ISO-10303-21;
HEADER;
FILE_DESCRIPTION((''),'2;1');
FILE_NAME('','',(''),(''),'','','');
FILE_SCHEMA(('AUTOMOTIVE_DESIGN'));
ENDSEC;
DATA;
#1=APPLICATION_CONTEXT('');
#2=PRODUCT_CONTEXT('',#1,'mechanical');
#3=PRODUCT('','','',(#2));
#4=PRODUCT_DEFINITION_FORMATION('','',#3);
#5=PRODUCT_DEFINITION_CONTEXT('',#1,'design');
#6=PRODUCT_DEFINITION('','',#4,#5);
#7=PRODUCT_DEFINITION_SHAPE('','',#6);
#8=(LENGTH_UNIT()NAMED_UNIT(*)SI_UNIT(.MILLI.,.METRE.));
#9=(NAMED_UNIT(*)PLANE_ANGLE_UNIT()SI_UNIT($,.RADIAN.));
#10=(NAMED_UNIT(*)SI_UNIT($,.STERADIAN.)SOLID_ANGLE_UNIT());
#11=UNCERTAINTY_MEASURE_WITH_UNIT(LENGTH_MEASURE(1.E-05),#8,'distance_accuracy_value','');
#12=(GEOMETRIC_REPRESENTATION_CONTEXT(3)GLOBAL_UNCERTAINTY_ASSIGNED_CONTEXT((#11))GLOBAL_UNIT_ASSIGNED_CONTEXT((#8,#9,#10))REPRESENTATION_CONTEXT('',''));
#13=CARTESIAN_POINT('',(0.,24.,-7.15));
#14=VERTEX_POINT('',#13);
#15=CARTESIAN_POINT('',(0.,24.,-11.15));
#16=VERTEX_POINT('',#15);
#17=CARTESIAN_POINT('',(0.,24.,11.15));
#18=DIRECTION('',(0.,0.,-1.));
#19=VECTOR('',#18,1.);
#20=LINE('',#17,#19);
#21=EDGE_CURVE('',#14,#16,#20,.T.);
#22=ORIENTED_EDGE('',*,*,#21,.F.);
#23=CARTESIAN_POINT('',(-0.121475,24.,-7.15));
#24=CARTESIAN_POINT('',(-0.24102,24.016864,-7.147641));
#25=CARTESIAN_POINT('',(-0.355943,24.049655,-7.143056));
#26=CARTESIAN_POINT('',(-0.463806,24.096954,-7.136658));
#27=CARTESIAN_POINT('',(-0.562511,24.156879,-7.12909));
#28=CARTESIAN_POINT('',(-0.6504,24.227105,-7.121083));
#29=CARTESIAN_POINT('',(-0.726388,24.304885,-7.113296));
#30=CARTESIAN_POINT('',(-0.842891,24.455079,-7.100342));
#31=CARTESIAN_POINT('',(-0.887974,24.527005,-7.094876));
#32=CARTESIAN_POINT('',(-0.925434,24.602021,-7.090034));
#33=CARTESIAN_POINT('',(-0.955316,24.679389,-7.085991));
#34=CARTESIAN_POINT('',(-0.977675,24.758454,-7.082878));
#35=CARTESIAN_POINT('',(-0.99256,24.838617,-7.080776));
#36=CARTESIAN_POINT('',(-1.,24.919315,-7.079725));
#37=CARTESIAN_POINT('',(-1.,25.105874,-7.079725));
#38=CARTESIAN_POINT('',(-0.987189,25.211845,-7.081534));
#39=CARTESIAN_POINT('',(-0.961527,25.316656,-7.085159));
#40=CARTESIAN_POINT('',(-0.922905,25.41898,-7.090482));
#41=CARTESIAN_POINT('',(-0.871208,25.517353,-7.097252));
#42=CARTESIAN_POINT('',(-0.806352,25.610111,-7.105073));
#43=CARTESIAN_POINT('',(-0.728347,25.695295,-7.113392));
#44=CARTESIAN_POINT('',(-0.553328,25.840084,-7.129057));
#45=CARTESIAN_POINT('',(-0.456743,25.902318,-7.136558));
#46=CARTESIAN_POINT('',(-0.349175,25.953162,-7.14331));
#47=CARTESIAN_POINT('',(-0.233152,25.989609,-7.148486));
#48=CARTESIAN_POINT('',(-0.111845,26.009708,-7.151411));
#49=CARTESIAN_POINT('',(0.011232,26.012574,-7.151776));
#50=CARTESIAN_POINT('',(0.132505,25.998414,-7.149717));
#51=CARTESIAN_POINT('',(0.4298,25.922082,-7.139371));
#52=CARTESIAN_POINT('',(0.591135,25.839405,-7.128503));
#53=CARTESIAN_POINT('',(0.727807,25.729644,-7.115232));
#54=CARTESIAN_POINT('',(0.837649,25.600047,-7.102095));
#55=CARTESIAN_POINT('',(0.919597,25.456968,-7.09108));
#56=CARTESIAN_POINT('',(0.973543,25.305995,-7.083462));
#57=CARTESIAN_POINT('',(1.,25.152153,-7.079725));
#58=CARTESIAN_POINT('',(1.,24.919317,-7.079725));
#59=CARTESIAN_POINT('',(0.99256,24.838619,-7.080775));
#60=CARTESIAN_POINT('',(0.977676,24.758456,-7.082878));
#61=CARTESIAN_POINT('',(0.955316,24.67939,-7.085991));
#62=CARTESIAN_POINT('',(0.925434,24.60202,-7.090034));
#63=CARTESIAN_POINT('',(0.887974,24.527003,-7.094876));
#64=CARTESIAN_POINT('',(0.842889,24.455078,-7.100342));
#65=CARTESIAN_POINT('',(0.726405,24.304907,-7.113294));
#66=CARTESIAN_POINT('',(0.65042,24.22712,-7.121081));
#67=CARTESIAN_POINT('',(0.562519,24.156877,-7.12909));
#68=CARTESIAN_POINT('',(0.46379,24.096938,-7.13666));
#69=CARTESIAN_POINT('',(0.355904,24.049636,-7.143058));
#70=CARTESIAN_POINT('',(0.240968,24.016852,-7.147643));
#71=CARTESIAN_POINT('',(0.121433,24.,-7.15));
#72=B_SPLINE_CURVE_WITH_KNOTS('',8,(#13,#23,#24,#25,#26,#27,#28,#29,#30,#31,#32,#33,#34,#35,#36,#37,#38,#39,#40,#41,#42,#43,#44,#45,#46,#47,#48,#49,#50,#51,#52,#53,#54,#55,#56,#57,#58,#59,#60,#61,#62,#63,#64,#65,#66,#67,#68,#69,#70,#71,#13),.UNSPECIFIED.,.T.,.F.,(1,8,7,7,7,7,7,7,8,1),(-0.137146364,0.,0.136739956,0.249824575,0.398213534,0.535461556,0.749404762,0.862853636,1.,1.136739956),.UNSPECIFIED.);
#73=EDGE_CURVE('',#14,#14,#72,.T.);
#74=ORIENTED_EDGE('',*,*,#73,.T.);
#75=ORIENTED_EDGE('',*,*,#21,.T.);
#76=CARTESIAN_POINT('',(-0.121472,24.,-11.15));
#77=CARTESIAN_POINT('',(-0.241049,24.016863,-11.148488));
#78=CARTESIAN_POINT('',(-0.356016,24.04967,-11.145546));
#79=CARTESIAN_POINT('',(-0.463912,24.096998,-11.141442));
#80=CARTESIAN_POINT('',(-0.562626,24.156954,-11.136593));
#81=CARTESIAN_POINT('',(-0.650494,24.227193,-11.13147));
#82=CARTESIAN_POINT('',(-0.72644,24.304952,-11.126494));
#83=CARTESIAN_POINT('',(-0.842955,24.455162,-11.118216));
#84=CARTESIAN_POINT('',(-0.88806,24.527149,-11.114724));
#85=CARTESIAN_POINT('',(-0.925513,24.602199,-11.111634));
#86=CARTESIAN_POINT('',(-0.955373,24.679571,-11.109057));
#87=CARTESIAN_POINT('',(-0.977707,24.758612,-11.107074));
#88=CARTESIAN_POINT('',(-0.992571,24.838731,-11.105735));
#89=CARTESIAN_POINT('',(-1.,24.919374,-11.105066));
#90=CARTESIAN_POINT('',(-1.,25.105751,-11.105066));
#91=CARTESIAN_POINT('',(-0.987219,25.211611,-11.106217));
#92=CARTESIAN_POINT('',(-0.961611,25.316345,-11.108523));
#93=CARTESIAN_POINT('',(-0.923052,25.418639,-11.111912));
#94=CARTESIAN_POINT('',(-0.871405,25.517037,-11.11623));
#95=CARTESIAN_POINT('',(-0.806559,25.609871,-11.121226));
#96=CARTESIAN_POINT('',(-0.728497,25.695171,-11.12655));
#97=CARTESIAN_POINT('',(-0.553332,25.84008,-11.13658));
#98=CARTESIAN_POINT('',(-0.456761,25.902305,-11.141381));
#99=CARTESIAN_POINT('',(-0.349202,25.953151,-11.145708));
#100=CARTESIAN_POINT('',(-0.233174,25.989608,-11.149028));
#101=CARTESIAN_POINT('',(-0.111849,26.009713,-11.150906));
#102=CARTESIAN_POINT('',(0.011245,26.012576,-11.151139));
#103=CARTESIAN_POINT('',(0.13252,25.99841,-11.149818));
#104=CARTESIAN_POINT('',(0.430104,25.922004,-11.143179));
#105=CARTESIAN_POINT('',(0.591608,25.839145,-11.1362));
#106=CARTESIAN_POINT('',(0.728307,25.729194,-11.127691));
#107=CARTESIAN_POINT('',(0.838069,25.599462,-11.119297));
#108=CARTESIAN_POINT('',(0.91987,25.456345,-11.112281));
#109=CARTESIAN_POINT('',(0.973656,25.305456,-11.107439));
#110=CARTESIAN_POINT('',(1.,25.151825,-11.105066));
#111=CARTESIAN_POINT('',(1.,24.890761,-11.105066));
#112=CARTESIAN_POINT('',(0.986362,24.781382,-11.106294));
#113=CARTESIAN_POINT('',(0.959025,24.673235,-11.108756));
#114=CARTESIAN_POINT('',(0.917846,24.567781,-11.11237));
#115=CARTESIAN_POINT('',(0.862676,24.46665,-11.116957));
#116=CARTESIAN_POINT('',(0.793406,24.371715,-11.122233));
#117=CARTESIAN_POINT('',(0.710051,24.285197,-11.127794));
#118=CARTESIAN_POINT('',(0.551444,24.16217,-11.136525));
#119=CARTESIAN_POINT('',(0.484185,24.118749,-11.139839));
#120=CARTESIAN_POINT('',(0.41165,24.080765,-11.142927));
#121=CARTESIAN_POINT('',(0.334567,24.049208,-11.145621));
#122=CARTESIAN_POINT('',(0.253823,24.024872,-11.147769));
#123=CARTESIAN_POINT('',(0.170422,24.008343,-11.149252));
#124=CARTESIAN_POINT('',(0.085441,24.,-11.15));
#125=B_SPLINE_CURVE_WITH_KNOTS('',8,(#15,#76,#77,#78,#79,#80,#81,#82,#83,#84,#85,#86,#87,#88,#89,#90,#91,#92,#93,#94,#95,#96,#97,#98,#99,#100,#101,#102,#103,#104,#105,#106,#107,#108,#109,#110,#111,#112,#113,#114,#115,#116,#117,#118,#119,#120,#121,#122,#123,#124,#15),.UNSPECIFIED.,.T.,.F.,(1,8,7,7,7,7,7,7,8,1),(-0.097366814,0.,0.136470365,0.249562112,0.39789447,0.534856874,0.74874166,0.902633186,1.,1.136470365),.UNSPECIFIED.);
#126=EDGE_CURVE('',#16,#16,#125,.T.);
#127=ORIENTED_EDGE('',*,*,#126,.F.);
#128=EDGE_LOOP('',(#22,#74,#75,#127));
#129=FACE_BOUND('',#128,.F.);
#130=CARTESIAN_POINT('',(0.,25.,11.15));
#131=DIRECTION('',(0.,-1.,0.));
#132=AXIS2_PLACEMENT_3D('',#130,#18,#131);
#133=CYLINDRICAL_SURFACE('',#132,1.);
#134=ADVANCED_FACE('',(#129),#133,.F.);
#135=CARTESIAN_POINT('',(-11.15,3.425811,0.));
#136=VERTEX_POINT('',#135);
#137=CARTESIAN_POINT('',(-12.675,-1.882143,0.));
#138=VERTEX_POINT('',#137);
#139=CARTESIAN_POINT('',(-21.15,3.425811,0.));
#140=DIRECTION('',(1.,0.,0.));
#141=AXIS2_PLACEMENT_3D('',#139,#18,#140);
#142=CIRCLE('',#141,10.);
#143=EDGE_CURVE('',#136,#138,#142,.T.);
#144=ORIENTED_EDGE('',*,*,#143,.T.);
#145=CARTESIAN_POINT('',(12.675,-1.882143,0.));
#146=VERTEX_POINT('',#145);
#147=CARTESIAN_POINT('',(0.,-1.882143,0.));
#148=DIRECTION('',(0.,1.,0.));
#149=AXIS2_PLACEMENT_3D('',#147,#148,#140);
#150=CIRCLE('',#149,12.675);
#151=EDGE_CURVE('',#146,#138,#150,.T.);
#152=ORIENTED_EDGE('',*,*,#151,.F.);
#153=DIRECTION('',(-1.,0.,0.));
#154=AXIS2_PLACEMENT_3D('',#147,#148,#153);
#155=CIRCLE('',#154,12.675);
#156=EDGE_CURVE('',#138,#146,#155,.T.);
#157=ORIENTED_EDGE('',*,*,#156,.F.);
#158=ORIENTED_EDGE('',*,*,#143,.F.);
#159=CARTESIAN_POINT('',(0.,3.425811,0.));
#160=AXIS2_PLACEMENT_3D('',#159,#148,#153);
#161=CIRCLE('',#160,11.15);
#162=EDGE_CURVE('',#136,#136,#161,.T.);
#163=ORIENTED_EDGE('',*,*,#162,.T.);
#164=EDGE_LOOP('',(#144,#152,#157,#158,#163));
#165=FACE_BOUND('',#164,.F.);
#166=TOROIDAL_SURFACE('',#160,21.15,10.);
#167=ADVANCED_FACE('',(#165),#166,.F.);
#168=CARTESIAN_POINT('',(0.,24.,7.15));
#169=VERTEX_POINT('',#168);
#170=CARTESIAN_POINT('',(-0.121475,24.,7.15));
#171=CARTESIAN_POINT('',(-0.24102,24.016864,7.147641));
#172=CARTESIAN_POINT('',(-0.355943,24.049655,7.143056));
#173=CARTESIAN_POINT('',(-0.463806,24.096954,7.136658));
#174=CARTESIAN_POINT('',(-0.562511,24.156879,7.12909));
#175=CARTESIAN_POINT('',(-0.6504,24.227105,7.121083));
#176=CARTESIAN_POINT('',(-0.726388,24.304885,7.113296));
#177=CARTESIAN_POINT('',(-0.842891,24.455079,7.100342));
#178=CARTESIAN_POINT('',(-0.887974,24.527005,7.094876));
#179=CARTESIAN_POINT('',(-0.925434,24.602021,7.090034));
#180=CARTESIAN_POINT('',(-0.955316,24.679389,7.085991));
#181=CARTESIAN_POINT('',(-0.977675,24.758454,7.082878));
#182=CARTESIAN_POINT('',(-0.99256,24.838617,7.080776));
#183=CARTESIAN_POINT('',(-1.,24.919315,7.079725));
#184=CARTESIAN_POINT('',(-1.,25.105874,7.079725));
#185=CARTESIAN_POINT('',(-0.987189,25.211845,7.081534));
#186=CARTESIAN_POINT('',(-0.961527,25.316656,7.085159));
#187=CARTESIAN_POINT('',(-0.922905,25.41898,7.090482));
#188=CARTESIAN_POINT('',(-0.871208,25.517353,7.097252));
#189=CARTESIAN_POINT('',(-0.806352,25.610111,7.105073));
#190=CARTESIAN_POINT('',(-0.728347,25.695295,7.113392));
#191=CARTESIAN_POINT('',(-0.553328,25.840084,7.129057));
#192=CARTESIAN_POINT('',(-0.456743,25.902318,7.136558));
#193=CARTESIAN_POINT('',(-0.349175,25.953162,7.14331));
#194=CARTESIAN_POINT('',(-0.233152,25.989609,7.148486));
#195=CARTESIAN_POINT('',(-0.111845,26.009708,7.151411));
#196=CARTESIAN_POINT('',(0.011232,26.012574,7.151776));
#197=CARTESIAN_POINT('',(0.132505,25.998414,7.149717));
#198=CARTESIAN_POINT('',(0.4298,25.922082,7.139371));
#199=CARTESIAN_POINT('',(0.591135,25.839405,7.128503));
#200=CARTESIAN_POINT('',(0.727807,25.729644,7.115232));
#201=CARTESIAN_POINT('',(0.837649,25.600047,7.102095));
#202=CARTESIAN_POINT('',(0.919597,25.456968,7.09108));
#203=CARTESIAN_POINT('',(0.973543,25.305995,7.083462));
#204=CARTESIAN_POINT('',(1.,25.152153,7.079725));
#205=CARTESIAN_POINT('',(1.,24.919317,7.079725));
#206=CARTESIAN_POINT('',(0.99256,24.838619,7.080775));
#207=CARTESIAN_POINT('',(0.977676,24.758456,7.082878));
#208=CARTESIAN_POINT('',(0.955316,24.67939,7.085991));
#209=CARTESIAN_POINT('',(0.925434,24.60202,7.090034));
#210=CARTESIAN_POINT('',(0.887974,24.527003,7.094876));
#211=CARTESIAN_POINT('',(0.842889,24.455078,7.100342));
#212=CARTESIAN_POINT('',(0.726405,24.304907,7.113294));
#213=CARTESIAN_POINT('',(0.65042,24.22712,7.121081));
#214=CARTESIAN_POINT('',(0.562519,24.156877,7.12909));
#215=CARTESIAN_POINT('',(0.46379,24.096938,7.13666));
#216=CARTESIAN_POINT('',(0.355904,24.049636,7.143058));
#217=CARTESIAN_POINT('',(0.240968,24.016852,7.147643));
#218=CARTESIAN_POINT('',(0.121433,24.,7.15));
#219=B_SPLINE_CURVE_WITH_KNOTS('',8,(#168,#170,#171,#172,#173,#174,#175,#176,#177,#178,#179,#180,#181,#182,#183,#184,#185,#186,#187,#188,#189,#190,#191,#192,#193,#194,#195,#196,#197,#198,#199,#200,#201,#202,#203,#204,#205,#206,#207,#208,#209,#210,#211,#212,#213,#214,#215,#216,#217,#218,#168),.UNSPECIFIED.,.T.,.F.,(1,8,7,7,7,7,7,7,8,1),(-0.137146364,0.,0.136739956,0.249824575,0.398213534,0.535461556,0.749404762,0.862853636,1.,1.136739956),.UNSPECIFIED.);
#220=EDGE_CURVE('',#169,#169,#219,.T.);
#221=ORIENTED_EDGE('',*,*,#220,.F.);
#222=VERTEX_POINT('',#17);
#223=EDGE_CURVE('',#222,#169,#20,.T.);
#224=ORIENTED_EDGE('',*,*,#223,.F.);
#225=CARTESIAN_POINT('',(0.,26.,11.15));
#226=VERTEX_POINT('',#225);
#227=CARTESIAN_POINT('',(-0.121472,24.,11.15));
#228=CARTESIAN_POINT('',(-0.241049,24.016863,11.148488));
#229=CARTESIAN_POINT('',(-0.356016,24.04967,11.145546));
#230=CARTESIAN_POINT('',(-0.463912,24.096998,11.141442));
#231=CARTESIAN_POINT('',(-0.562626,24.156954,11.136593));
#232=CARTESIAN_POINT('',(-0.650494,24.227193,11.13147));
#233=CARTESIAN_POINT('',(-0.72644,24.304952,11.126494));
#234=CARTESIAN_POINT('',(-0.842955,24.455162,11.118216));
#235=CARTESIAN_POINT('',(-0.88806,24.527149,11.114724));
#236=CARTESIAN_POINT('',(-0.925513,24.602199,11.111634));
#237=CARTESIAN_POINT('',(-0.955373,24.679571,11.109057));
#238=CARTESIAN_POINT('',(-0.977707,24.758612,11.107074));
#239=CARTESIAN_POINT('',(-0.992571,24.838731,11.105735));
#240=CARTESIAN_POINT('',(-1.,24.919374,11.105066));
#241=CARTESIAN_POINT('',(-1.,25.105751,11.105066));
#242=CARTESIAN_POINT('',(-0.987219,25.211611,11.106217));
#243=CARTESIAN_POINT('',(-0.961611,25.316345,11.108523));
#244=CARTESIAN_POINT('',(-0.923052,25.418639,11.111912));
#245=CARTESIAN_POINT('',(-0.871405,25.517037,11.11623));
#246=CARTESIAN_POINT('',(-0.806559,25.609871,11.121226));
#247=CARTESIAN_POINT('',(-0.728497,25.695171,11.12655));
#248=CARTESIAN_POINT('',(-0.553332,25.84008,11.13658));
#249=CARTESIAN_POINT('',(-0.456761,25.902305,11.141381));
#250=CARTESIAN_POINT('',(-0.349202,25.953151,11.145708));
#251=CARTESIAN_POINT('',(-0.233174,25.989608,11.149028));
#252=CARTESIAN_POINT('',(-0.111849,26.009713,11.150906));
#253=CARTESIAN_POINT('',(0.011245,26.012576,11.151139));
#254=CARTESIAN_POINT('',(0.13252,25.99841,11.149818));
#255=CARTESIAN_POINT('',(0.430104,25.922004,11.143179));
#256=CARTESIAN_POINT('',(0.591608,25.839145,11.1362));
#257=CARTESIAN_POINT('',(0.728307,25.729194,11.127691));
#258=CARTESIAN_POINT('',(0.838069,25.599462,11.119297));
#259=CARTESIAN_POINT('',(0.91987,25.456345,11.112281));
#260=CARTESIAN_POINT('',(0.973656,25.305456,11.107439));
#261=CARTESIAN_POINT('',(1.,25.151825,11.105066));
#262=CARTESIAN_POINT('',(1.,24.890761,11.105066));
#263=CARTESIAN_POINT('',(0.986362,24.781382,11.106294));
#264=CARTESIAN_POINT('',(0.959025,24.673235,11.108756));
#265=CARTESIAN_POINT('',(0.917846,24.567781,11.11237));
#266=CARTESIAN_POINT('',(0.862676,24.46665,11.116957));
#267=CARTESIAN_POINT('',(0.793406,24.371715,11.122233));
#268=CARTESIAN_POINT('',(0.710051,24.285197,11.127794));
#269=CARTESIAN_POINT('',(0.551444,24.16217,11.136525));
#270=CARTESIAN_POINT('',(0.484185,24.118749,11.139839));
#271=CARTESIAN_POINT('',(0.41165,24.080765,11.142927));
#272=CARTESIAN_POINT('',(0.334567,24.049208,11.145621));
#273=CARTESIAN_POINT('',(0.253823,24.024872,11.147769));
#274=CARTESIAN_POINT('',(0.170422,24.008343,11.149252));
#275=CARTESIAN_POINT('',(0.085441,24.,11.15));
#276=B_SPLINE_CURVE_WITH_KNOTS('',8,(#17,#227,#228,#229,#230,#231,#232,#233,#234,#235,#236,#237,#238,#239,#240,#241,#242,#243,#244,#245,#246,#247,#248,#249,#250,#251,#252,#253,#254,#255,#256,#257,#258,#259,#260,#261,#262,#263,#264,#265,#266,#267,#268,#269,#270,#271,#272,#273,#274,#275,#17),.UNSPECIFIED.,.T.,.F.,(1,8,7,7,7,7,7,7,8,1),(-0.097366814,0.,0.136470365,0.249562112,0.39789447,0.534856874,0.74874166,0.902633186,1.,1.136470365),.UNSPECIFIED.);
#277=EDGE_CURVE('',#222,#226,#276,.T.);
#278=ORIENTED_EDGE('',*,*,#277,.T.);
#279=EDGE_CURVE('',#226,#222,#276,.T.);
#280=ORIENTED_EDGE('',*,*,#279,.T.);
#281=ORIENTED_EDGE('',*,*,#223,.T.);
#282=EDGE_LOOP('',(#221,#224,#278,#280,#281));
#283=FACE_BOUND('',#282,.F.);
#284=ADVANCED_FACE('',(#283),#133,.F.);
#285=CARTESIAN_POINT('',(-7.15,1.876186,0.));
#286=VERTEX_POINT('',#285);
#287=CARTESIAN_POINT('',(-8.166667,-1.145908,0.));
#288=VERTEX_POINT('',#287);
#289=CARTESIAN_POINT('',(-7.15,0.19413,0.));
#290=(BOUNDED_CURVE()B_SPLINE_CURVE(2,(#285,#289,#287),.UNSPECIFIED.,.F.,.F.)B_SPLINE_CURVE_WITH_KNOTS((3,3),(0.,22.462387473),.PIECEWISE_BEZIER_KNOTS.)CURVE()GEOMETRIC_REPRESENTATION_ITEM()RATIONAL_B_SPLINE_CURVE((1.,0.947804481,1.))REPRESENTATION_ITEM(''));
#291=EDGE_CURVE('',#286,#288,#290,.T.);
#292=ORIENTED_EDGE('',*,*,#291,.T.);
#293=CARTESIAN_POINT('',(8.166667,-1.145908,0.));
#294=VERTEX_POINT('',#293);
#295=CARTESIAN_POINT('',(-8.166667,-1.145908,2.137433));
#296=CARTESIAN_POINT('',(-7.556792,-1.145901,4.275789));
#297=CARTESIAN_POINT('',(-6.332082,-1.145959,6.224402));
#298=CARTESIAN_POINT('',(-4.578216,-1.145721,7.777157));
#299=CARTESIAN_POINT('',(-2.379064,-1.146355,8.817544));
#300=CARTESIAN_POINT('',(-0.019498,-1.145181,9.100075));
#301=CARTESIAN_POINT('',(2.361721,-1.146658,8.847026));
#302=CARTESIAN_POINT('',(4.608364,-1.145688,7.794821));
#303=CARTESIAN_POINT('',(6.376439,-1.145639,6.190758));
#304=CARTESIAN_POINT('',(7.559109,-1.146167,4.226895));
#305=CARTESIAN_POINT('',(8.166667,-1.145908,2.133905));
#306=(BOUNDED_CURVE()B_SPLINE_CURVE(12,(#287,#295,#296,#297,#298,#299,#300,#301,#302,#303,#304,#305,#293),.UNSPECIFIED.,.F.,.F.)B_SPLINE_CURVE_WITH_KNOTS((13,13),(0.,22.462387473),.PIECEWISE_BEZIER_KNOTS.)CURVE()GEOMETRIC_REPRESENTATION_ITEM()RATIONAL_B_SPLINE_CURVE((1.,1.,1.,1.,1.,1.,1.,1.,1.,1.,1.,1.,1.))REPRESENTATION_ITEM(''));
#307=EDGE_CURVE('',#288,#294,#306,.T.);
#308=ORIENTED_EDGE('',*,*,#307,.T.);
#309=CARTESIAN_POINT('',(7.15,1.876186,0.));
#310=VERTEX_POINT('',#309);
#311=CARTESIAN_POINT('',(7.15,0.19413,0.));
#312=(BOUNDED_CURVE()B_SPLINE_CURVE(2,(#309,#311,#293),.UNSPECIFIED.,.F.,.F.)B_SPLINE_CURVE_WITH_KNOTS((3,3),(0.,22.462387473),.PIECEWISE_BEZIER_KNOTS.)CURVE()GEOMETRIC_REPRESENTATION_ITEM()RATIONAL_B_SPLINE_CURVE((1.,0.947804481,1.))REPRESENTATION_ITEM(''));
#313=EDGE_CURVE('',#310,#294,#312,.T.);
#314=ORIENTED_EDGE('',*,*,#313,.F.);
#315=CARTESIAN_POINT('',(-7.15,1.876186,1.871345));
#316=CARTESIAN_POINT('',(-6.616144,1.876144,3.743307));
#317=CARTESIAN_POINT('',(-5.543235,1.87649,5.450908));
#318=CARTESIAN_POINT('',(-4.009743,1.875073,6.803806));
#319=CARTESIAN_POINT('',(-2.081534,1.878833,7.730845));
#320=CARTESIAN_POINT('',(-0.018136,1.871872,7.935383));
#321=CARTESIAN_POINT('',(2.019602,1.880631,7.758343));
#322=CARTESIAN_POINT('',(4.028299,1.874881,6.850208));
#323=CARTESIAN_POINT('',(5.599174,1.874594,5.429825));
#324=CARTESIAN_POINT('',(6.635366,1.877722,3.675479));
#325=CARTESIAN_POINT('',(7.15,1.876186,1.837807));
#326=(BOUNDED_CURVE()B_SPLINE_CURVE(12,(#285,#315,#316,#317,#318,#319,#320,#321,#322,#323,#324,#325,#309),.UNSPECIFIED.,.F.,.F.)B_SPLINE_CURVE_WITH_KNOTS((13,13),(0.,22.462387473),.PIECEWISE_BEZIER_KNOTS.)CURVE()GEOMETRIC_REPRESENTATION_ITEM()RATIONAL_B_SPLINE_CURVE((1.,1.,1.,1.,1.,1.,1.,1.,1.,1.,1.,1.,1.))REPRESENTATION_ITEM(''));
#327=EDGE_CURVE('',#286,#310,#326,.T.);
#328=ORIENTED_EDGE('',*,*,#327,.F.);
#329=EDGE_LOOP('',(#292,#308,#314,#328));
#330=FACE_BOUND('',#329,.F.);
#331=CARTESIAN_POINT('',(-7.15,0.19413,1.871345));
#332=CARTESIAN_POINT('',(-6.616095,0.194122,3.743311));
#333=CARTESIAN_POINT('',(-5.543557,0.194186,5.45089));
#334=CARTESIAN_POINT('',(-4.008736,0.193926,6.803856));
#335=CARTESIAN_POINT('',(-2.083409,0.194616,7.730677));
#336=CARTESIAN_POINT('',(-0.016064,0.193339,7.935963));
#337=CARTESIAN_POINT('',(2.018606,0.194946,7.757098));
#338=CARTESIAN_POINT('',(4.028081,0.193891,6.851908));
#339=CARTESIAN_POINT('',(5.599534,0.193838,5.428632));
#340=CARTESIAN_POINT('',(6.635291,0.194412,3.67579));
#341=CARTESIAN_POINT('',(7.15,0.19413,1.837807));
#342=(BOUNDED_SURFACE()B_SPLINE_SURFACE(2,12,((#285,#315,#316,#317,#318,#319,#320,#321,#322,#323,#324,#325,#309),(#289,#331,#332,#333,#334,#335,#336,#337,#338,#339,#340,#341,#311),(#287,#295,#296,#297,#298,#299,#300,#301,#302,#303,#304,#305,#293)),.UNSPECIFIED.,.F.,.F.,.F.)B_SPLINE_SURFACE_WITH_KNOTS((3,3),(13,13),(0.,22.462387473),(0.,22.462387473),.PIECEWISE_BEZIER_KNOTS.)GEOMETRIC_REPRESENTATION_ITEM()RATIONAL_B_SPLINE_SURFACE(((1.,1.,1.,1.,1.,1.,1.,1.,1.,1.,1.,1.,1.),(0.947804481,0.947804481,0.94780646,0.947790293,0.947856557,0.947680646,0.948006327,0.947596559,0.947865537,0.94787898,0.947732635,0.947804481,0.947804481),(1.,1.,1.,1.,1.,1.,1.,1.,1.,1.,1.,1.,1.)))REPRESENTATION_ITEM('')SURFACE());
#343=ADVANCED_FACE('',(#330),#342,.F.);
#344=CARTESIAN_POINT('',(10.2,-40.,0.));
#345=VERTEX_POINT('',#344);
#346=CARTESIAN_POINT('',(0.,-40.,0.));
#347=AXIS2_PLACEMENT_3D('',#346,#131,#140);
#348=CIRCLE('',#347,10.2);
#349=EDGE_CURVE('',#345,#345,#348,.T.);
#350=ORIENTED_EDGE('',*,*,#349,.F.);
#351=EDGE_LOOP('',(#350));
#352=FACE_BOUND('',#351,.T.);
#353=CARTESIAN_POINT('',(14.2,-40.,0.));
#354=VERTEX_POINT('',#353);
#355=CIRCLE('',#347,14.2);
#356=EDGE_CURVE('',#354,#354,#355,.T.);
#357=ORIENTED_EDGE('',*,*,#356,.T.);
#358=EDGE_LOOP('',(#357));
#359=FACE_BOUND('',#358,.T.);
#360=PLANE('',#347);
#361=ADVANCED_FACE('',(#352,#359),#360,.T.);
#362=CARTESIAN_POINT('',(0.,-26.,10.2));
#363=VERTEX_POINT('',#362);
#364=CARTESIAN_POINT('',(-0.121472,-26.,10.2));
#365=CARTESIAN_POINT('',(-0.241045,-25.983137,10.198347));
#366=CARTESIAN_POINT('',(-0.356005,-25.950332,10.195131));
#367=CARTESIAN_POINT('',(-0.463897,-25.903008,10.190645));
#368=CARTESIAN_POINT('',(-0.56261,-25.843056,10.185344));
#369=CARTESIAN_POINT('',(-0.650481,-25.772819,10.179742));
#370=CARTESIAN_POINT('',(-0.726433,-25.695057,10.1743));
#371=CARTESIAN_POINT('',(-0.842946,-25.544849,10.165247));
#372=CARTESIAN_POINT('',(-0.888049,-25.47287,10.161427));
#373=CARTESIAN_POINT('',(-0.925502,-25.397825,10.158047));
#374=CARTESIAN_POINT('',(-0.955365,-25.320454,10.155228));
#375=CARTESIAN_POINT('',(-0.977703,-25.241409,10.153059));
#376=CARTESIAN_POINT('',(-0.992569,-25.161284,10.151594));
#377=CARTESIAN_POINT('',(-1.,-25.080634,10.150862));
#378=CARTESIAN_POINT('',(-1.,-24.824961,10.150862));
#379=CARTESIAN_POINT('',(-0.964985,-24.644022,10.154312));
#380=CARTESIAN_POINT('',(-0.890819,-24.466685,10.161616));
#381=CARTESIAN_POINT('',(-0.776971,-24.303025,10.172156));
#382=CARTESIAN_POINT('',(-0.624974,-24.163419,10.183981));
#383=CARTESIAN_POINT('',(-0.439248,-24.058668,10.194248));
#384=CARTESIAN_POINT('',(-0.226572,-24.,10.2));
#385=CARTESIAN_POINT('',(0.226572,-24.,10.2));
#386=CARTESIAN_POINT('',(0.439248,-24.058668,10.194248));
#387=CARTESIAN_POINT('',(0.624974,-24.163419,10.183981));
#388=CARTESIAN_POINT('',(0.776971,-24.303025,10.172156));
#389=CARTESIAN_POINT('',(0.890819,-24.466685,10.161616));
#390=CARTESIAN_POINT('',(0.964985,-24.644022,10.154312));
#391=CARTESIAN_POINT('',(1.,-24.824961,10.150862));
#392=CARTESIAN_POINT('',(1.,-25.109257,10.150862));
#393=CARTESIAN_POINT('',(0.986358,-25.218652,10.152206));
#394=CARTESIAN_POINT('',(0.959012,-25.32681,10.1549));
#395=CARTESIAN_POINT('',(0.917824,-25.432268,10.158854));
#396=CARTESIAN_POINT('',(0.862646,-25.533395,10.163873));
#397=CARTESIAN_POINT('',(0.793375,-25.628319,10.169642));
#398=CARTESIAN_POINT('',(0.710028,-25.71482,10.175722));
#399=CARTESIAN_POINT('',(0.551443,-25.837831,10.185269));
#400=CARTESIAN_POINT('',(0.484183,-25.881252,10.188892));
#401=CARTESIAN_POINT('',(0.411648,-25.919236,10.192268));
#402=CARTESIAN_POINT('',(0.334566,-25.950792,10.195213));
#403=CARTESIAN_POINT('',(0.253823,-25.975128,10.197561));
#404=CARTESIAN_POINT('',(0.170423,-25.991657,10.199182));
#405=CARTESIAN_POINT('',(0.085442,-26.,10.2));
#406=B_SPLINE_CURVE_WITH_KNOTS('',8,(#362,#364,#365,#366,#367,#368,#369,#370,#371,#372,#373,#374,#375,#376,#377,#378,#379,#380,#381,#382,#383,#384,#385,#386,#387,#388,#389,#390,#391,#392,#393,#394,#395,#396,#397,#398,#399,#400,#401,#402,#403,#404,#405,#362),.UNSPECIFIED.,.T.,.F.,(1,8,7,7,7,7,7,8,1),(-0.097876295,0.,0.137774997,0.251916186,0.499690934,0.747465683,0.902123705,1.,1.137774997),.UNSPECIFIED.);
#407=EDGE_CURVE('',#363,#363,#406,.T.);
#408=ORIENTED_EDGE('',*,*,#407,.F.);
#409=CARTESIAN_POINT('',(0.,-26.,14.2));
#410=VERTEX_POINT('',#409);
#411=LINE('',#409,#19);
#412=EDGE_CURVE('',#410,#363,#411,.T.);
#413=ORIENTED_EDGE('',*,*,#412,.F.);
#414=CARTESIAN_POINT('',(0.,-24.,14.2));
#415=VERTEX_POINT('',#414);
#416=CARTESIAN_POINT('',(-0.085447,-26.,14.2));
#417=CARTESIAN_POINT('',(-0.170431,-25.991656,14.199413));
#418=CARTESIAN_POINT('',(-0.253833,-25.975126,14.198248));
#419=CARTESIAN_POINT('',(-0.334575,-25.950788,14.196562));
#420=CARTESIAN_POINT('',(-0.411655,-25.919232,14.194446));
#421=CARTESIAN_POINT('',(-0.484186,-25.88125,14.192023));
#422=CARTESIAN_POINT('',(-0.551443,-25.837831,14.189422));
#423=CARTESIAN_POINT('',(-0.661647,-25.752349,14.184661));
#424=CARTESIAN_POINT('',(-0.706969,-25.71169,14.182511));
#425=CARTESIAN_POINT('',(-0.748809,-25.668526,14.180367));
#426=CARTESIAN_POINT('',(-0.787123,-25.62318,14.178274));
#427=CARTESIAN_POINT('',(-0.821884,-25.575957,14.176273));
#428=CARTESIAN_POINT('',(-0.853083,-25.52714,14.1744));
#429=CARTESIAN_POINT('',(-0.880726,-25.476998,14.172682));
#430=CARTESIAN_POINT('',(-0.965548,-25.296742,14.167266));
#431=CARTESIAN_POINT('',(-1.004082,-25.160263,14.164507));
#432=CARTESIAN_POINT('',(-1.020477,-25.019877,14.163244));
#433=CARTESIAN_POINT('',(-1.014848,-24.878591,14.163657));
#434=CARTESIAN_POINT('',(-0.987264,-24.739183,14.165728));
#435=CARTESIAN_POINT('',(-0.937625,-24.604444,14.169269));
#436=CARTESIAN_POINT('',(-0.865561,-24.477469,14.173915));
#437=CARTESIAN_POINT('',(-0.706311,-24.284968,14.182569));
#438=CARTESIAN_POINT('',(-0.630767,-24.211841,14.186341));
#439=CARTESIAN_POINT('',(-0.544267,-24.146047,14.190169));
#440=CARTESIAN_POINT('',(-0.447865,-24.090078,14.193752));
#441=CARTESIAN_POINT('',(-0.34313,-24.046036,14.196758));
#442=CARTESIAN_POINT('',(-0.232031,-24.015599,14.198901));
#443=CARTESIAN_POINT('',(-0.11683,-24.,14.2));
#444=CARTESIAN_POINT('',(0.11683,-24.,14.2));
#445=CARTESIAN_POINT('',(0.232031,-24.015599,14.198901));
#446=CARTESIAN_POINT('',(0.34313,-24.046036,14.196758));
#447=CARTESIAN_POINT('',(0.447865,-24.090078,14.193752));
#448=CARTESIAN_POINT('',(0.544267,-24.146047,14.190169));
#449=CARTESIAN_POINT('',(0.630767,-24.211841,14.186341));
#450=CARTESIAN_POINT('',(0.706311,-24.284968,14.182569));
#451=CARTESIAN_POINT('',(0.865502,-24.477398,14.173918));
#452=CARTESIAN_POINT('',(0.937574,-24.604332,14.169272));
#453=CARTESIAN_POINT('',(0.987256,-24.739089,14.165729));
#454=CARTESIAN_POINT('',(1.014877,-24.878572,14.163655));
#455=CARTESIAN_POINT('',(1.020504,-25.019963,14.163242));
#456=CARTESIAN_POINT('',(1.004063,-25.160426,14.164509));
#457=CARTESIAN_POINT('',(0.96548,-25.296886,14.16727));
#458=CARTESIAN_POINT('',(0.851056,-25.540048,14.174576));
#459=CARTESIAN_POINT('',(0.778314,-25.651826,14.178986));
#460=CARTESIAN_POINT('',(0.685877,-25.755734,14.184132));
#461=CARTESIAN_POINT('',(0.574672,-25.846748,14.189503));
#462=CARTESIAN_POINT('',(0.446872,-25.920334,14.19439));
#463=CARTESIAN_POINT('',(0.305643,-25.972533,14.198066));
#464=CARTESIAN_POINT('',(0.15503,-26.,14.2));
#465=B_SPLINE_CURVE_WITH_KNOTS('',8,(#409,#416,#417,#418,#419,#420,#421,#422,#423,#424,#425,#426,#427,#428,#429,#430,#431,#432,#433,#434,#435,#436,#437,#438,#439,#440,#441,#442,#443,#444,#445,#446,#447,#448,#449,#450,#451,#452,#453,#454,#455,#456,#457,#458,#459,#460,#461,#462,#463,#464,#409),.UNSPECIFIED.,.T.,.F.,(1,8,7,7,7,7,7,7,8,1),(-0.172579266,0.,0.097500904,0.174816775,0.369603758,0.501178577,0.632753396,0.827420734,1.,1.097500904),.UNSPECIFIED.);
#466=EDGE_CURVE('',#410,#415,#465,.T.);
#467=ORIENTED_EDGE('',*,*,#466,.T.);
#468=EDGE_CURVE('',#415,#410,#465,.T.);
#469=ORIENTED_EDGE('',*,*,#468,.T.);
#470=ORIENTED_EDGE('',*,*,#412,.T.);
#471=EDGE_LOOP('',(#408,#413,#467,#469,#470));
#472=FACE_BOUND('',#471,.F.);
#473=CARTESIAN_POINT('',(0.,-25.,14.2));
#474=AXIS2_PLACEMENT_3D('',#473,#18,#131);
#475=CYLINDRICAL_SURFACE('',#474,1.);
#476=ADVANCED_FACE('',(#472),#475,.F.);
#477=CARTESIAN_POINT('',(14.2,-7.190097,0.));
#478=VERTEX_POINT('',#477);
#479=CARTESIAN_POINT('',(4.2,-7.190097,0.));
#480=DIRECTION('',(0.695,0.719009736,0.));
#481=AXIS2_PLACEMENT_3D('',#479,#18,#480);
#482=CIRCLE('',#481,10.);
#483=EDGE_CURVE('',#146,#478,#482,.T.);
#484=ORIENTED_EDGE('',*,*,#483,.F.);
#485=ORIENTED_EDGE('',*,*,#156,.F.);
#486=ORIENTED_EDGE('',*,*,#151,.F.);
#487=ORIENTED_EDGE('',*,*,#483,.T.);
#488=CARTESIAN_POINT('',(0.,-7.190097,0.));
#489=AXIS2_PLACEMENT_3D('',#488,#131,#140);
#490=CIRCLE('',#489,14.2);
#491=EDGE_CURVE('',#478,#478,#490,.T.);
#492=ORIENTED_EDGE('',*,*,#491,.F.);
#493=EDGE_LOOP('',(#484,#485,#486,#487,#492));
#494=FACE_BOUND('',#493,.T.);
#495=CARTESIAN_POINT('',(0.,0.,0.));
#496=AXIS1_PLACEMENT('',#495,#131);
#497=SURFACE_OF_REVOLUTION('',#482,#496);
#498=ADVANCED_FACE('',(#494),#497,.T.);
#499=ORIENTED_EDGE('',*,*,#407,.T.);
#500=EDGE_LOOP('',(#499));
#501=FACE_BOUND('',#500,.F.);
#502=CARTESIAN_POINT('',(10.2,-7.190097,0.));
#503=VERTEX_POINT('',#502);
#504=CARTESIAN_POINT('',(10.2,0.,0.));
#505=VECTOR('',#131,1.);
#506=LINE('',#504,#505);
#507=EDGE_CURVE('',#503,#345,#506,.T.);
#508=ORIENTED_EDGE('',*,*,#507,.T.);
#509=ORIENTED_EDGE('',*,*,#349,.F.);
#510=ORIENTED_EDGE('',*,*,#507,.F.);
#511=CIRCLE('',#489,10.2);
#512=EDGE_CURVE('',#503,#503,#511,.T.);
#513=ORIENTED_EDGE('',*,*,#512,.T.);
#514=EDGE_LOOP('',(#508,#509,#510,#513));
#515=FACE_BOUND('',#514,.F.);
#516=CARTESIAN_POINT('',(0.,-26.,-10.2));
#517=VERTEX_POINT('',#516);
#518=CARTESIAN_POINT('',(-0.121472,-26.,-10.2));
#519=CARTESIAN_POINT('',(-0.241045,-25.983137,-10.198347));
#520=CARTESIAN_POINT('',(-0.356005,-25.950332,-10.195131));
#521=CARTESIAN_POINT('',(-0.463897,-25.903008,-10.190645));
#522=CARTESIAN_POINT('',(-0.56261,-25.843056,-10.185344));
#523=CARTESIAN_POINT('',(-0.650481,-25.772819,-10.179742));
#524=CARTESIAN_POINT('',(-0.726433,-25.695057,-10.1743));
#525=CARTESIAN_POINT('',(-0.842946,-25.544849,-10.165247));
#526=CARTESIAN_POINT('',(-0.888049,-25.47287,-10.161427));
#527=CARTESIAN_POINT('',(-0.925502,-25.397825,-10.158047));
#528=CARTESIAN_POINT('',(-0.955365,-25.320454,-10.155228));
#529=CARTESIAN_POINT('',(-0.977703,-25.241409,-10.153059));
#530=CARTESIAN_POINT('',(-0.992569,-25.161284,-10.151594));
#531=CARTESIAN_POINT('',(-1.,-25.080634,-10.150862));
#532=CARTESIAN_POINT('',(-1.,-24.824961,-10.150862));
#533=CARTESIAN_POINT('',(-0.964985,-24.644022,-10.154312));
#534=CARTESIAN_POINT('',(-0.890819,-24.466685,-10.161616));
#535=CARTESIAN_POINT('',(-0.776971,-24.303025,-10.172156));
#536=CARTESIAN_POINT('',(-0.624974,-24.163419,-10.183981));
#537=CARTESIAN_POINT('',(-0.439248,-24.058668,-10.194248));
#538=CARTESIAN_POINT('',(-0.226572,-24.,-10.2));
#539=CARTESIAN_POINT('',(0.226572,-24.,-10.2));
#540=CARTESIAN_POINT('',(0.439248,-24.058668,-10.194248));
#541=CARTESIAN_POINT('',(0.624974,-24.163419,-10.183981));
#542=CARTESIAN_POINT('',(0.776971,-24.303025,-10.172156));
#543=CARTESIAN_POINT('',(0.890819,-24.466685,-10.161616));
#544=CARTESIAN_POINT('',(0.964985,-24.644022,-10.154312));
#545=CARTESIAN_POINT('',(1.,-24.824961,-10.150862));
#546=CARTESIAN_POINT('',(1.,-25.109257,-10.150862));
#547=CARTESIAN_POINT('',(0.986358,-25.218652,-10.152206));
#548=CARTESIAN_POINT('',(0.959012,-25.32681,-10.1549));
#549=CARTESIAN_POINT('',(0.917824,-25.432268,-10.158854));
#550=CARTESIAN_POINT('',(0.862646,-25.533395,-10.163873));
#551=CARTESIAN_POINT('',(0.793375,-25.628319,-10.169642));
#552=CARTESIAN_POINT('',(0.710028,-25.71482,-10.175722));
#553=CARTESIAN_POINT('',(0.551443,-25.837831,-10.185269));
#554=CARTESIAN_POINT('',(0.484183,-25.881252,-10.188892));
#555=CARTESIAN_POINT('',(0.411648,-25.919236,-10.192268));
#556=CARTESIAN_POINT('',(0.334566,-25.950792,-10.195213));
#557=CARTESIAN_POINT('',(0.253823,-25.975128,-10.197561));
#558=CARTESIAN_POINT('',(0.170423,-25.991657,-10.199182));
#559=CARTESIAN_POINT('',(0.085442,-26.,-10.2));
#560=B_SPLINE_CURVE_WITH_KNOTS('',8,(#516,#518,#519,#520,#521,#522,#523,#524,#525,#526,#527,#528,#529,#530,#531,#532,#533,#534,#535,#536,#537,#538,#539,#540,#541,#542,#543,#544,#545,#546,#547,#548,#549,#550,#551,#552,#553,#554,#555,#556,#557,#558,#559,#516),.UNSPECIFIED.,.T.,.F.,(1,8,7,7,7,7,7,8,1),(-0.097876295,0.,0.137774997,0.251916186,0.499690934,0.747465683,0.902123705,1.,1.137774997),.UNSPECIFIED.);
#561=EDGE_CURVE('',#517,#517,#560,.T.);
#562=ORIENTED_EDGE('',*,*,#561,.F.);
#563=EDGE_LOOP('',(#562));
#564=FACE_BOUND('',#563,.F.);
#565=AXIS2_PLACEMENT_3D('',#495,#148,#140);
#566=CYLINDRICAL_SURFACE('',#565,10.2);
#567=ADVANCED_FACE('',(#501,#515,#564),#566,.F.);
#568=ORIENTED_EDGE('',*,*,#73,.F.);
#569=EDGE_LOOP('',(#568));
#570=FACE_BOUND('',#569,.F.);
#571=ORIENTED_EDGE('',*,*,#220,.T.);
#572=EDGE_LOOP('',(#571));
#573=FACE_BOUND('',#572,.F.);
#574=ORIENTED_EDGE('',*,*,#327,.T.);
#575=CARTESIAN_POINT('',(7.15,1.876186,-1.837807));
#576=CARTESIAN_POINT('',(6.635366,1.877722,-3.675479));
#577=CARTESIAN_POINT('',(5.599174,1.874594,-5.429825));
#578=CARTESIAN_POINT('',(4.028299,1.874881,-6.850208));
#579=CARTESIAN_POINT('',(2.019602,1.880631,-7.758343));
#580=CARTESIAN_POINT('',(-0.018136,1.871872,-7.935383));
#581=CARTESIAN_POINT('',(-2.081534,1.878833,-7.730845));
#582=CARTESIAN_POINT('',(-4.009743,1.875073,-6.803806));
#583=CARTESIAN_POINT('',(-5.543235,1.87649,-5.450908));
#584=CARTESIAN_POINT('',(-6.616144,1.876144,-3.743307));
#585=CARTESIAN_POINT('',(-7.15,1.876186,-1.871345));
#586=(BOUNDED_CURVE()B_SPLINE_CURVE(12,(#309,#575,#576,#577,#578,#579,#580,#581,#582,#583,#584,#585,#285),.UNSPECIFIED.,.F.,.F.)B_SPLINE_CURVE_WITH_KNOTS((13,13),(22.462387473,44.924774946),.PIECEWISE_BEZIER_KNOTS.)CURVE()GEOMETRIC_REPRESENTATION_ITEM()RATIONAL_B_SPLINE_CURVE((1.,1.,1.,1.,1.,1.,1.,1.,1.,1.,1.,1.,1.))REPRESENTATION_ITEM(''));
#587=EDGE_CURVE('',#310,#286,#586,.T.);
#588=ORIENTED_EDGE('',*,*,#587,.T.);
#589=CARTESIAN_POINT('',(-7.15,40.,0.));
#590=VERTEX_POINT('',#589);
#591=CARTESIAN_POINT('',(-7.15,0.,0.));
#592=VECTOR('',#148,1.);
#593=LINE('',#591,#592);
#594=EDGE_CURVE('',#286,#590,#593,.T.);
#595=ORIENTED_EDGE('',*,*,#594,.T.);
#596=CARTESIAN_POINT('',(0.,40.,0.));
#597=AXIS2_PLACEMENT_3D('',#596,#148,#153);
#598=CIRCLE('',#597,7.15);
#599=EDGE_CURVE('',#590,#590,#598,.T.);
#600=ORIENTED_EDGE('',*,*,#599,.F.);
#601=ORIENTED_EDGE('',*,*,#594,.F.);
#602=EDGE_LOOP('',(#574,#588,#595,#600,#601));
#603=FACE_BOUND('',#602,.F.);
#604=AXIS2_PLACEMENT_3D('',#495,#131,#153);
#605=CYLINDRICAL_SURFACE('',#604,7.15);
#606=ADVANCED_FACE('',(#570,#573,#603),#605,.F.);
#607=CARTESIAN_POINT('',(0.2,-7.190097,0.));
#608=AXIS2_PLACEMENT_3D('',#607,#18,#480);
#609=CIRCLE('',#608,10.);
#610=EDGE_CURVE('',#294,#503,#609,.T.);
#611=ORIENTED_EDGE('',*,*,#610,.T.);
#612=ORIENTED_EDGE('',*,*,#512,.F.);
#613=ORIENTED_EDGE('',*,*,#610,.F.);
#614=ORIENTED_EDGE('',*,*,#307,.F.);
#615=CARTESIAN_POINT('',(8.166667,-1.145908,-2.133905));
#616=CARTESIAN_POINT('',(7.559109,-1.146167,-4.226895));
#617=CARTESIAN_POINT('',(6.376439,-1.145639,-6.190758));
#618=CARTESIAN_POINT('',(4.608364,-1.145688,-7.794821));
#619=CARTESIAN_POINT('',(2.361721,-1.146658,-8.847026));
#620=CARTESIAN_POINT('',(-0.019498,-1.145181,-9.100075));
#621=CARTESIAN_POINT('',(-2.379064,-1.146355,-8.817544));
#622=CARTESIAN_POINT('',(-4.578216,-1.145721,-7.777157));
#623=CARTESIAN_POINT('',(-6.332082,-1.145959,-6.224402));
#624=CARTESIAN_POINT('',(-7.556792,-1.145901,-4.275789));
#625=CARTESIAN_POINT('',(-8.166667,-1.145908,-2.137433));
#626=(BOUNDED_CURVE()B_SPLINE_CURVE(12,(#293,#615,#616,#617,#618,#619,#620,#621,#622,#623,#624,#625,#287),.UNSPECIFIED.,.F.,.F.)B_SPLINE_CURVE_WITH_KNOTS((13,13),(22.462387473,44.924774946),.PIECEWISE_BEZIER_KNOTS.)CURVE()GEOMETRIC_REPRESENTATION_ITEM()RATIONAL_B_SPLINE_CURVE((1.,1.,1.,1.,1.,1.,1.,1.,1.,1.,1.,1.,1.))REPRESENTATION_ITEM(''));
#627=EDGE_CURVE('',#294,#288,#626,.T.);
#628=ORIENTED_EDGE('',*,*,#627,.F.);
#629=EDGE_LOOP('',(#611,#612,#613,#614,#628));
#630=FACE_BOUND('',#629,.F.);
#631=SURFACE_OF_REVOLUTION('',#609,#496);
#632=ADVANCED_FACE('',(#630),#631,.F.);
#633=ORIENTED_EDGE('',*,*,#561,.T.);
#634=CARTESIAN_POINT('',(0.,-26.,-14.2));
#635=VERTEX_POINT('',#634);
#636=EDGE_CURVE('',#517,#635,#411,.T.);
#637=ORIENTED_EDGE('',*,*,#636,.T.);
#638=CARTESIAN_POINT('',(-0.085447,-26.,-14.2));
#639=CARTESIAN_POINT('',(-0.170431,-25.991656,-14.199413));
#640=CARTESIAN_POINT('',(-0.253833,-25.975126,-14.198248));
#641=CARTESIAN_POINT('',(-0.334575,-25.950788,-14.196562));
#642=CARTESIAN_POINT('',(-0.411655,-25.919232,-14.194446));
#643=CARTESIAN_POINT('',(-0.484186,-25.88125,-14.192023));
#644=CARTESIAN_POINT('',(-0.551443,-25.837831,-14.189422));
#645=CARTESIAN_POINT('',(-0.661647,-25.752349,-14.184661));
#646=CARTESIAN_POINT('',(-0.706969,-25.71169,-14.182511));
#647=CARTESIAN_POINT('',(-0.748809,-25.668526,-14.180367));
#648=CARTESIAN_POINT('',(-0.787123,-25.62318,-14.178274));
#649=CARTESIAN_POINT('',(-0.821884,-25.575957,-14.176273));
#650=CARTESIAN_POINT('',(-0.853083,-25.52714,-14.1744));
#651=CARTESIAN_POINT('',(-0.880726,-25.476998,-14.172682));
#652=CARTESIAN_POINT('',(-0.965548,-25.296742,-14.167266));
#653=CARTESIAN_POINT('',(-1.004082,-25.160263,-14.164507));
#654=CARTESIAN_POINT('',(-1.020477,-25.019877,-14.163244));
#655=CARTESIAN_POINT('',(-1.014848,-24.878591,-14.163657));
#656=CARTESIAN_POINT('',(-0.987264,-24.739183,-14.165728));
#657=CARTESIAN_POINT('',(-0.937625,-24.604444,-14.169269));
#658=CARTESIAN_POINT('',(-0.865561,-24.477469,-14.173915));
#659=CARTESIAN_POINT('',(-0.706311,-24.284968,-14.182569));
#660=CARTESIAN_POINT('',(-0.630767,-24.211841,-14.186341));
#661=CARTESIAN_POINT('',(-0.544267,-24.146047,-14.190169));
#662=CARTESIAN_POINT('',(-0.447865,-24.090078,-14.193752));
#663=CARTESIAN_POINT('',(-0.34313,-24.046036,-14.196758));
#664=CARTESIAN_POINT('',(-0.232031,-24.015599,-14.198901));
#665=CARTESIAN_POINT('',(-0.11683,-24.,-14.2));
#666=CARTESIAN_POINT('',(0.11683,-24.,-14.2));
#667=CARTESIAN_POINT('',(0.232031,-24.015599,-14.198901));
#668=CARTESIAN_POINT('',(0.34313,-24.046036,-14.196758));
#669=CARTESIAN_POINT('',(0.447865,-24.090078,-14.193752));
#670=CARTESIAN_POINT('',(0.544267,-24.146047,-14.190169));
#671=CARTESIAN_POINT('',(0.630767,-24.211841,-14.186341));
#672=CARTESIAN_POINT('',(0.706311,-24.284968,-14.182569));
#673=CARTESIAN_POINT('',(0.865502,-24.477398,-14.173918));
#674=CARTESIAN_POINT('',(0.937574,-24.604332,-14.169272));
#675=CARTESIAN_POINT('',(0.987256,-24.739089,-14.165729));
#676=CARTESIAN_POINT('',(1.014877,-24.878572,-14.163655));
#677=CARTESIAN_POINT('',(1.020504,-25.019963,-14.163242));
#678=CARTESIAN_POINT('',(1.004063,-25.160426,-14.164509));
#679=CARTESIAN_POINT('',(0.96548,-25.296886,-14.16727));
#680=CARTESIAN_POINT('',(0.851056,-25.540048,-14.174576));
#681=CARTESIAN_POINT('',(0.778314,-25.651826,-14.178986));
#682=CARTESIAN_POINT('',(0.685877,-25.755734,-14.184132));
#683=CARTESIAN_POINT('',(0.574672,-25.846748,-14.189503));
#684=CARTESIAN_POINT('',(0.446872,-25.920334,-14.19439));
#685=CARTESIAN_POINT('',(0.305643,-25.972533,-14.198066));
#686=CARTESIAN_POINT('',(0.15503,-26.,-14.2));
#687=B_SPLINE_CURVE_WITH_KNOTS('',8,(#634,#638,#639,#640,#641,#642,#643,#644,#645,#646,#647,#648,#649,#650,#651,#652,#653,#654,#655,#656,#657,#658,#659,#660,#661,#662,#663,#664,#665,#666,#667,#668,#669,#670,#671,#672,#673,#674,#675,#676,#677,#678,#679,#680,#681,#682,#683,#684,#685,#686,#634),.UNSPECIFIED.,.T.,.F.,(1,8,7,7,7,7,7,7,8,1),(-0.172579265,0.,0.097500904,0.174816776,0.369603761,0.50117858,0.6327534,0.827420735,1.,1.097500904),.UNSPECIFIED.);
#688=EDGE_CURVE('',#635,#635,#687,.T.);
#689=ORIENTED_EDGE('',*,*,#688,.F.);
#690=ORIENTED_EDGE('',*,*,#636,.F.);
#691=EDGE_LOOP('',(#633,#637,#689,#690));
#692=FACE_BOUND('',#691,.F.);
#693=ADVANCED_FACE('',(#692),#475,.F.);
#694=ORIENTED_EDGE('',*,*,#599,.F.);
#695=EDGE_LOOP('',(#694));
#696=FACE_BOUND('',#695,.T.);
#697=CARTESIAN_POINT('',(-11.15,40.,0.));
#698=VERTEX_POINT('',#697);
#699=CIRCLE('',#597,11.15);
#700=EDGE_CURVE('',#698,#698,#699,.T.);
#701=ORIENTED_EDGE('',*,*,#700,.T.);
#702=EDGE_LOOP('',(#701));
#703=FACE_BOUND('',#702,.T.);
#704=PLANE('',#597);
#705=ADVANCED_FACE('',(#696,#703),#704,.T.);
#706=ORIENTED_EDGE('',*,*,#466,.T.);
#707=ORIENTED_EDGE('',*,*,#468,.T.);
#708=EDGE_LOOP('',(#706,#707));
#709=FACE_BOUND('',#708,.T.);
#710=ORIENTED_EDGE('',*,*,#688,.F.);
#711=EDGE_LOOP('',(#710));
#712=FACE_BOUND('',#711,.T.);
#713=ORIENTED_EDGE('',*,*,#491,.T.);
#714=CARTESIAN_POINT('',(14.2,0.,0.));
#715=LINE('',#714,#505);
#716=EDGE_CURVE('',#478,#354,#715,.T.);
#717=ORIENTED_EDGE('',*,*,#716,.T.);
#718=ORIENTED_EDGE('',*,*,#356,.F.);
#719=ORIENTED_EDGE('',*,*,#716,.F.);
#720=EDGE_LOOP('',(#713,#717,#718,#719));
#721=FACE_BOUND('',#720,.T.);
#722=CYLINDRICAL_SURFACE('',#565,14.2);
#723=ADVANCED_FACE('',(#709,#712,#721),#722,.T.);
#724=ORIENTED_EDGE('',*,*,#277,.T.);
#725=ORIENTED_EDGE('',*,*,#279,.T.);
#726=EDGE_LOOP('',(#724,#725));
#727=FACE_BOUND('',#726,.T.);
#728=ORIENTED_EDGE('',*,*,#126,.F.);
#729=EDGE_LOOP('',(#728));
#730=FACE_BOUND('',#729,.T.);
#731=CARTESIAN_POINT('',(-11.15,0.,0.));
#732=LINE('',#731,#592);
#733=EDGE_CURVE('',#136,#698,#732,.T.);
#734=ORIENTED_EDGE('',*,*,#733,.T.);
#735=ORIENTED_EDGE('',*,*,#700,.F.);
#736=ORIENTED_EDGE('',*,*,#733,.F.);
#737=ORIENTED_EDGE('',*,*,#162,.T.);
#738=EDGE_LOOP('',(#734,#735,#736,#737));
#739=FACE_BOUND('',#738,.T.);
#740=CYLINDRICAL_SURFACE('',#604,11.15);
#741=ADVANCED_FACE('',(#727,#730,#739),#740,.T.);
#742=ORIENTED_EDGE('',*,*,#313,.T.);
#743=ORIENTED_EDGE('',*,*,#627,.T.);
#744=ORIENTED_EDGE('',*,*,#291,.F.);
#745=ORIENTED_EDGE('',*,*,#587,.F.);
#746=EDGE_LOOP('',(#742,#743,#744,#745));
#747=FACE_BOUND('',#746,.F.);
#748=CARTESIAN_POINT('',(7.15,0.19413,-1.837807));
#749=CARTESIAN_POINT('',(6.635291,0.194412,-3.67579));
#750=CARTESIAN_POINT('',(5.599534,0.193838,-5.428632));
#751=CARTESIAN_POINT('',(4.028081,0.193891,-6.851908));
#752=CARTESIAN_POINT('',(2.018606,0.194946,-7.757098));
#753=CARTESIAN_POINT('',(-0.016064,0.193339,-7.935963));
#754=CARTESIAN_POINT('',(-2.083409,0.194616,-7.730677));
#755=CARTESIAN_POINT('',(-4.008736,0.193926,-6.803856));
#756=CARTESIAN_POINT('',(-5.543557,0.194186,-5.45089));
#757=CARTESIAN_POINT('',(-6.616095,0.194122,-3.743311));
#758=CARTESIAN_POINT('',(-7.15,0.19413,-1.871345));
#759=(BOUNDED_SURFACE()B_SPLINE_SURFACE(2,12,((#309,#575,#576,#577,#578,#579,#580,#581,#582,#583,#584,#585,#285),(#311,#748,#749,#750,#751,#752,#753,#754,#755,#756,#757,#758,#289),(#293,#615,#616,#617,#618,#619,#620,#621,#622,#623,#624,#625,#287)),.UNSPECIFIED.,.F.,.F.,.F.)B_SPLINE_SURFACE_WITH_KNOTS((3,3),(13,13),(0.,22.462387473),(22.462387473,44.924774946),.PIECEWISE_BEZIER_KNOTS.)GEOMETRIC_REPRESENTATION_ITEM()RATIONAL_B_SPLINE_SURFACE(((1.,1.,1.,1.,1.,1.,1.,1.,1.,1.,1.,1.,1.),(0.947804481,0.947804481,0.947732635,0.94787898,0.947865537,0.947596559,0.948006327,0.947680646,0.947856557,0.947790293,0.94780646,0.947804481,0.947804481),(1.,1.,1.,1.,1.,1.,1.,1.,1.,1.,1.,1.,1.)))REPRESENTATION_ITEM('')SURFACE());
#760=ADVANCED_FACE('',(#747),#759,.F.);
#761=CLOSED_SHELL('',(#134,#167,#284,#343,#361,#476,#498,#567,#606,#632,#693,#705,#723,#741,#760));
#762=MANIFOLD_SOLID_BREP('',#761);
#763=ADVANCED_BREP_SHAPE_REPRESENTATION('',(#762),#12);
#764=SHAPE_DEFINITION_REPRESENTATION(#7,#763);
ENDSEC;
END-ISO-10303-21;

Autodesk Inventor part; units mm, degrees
ref_plane "YZ Plane" through (0, 0, 0) normal (1, 0, 0) x (0, 1, 0)
sketch "Sketch1" plane through (0, 0, 0) normal (0, 1, 0) x (-1, 0, 0)
  circle A0 centre (0, 0) radius 7.15
  circle A1 centre (0, 0) radius 11.15
  point P0 (0, 11.15)
  dimension "d1" = 22.3
  dimension "d0" = 14.3
extrude "Small" add sketch "Sketch1" along normal blind 40
sketch "Sketch2" plane through (0, 0, 0) normal (0, -1, 0) x (1, 0, 0)
  circle A0 centre (0, 0) radius 7.15 projected
  circle A1 centre (0, 0) radius 10.2
  circle A2 centre (0, 0) radius 11.15 projected
  circle A3 centre (0, 0) radius 14.2
  point P0 (0, 14.2)
  dimension "d5" = 28.4
  dimension "d4" = 20.4
extrude "Big" add sketch "Sketch2" along normal blind 40 contours A2 | A3
ref_plane "Work Plane1" through (0, 0, 11.15) normal (0, 0, 1) x (1, 0, 0)
ref_plane "Work Plane2" through (0, 0, 14.2) normal (0, 0, 1) x (1, 0, 0)
sketch "Sketch3" plane through (0, 0, 11.15) normal (0, 0, 1) x (1, 0, 0)
  line L0 (11.15, 40) -> (-11.15, 40) projected
  point P0 (0, 0)
  point P1 (0, 25)
  dimension "d25" = 15
hole "Screw Hole for small" at (0, 25, 11.15) direction (0, 0, -1) diameter 2 end through all
sketch "Sketch4" plane through (0, 0, 14.2) normal (0, 0, 1) x (1, 0, 0)
  line L0 (-14.2, -40) -> (14.2, -40) projected
  point P0 (0, 0)
  point P1 (0, -25)
  dimension "d24" = 15
hole "Screw Hole for big" at (0, -25, 14.2) direction (0, 0, -1) diameter 2 end through all
fillet "Fillet1 outside" radius 10 2 edges at (-14.2, 0, 0) (11.15, 0, 0)
fillet "Fillet2 Inside" radius 10 1 edges at (-10.2, 0, 0)
fillet "Fillet3" radius 5 2 edges at (0, 0, 7.15) (0, 0, -7.15)
properties part number "hollowCylinderTest_3DPrint"
